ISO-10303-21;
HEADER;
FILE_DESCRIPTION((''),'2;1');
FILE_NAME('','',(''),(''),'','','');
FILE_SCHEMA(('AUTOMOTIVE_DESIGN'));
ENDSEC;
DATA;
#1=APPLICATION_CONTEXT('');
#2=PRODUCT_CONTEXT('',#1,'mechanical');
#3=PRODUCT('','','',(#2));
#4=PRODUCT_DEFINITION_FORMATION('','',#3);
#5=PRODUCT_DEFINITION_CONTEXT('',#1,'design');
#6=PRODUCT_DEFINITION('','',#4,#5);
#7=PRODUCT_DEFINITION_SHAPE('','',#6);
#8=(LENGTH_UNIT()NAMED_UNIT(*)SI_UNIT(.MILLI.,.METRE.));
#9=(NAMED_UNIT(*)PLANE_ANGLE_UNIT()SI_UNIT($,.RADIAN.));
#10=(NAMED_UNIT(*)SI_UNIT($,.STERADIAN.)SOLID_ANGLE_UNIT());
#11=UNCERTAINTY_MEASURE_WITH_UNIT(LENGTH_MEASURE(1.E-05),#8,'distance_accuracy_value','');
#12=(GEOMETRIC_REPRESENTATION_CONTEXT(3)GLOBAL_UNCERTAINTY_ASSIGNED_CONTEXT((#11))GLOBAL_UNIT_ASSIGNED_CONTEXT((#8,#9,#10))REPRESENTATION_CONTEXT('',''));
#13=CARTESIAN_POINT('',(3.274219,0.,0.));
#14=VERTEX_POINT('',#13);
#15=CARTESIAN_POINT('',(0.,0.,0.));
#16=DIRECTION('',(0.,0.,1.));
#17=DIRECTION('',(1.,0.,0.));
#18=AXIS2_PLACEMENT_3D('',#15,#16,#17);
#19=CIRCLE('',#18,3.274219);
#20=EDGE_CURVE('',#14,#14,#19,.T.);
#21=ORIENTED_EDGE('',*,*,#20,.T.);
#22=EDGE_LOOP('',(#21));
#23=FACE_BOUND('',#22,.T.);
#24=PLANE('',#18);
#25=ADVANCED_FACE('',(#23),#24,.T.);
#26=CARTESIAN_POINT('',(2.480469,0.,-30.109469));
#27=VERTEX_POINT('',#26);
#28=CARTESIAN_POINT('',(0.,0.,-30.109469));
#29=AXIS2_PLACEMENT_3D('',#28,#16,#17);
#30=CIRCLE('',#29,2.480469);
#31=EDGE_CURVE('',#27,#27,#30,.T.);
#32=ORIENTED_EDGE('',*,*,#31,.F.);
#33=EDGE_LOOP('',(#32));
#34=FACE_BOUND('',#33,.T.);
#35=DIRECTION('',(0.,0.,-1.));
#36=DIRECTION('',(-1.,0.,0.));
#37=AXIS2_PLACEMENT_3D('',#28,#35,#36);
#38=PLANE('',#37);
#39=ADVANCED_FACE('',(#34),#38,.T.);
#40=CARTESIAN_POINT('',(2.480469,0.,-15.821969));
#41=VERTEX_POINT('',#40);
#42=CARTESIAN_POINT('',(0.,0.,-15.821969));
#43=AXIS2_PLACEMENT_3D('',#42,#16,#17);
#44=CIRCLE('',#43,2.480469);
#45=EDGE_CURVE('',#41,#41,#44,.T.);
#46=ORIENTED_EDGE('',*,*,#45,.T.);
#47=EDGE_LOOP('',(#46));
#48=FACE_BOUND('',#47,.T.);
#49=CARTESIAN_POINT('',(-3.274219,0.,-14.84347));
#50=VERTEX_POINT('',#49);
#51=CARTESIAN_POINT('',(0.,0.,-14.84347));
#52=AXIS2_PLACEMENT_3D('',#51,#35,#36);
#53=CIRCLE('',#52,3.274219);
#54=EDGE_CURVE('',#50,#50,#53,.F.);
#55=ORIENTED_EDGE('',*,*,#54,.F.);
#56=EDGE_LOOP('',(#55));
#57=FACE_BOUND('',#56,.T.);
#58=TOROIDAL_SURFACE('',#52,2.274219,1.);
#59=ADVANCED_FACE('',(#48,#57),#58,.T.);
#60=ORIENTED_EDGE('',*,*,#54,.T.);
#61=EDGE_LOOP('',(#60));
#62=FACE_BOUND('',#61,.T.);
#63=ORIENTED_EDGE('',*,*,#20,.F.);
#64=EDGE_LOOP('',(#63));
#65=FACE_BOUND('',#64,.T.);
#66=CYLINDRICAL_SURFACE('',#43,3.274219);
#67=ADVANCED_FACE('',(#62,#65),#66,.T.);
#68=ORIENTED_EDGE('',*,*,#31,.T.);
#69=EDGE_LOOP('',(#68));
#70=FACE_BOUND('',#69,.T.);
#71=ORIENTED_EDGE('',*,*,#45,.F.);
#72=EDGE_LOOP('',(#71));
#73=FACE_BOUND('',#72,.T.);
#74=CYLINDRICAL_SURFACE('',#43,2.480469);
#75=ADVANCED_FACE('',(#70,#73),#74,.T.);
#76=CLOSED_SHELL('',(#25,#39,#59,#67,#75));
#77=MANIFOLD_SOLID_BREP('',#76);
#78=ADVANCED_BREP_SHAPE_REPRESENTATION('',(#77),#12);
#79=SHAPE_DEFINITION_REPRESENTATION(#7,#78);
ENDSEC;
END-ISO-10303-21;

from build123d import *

# Parameters (mm, degrees)
FILLET2_R = 1


with BuildPart() as part:
    # Sketch1 → Revolve1 (revolve)
    with BuildSketch(Plane(origin=(0, 0, 0), x_dir=(1, 0, 0), z_dir=(0, 1, 0))):
        Polygon((2.48046875, 15.821969221), (3.27421875, 15.821969221), (3.27421875, 0), (0, 0), (0, 15.821969221), (0, 30.109469221), (2.48046875, 30.109469221), align=None)
    revolve(axis=Axis((0, 0, -15.821969221), (0, 0, -1)))

    # Fillet2
    # the kernel refuses this fillet: 1 mm, written as the material it takes off along each edge
    with BuildSketch(Plane(origin=(0, 0, -15.821969221), x_dir=(1, 0, 0), z_dir=(0, 1, 0))) as fillet2_piece_1:
        with BuildLine():
            CenterArc((2.27421875, -0.978499329), FILLET2_R, 0, 78.097317351)
            Line((3.27421875, -0.978499329), (3.29421875, -0.978499329))
            Line((3.29421875, -0.978499329), (3.29421875, 0))
            Line((3.29421875, 0), (3.27421875, 0.02))
            ThreePointArc((3.27421875, 0.02), (2.87734375, 0.02), (2.48459375, 0.019569987))
            Line((2.48459375, 0.019569987), (2.48046875, 0))
        make_face()
    revolve(axis=Axis((0, 0, -15.821969221), (0, 0, -1)), mode=Mode.SUBTRACT)


solid = part.part
